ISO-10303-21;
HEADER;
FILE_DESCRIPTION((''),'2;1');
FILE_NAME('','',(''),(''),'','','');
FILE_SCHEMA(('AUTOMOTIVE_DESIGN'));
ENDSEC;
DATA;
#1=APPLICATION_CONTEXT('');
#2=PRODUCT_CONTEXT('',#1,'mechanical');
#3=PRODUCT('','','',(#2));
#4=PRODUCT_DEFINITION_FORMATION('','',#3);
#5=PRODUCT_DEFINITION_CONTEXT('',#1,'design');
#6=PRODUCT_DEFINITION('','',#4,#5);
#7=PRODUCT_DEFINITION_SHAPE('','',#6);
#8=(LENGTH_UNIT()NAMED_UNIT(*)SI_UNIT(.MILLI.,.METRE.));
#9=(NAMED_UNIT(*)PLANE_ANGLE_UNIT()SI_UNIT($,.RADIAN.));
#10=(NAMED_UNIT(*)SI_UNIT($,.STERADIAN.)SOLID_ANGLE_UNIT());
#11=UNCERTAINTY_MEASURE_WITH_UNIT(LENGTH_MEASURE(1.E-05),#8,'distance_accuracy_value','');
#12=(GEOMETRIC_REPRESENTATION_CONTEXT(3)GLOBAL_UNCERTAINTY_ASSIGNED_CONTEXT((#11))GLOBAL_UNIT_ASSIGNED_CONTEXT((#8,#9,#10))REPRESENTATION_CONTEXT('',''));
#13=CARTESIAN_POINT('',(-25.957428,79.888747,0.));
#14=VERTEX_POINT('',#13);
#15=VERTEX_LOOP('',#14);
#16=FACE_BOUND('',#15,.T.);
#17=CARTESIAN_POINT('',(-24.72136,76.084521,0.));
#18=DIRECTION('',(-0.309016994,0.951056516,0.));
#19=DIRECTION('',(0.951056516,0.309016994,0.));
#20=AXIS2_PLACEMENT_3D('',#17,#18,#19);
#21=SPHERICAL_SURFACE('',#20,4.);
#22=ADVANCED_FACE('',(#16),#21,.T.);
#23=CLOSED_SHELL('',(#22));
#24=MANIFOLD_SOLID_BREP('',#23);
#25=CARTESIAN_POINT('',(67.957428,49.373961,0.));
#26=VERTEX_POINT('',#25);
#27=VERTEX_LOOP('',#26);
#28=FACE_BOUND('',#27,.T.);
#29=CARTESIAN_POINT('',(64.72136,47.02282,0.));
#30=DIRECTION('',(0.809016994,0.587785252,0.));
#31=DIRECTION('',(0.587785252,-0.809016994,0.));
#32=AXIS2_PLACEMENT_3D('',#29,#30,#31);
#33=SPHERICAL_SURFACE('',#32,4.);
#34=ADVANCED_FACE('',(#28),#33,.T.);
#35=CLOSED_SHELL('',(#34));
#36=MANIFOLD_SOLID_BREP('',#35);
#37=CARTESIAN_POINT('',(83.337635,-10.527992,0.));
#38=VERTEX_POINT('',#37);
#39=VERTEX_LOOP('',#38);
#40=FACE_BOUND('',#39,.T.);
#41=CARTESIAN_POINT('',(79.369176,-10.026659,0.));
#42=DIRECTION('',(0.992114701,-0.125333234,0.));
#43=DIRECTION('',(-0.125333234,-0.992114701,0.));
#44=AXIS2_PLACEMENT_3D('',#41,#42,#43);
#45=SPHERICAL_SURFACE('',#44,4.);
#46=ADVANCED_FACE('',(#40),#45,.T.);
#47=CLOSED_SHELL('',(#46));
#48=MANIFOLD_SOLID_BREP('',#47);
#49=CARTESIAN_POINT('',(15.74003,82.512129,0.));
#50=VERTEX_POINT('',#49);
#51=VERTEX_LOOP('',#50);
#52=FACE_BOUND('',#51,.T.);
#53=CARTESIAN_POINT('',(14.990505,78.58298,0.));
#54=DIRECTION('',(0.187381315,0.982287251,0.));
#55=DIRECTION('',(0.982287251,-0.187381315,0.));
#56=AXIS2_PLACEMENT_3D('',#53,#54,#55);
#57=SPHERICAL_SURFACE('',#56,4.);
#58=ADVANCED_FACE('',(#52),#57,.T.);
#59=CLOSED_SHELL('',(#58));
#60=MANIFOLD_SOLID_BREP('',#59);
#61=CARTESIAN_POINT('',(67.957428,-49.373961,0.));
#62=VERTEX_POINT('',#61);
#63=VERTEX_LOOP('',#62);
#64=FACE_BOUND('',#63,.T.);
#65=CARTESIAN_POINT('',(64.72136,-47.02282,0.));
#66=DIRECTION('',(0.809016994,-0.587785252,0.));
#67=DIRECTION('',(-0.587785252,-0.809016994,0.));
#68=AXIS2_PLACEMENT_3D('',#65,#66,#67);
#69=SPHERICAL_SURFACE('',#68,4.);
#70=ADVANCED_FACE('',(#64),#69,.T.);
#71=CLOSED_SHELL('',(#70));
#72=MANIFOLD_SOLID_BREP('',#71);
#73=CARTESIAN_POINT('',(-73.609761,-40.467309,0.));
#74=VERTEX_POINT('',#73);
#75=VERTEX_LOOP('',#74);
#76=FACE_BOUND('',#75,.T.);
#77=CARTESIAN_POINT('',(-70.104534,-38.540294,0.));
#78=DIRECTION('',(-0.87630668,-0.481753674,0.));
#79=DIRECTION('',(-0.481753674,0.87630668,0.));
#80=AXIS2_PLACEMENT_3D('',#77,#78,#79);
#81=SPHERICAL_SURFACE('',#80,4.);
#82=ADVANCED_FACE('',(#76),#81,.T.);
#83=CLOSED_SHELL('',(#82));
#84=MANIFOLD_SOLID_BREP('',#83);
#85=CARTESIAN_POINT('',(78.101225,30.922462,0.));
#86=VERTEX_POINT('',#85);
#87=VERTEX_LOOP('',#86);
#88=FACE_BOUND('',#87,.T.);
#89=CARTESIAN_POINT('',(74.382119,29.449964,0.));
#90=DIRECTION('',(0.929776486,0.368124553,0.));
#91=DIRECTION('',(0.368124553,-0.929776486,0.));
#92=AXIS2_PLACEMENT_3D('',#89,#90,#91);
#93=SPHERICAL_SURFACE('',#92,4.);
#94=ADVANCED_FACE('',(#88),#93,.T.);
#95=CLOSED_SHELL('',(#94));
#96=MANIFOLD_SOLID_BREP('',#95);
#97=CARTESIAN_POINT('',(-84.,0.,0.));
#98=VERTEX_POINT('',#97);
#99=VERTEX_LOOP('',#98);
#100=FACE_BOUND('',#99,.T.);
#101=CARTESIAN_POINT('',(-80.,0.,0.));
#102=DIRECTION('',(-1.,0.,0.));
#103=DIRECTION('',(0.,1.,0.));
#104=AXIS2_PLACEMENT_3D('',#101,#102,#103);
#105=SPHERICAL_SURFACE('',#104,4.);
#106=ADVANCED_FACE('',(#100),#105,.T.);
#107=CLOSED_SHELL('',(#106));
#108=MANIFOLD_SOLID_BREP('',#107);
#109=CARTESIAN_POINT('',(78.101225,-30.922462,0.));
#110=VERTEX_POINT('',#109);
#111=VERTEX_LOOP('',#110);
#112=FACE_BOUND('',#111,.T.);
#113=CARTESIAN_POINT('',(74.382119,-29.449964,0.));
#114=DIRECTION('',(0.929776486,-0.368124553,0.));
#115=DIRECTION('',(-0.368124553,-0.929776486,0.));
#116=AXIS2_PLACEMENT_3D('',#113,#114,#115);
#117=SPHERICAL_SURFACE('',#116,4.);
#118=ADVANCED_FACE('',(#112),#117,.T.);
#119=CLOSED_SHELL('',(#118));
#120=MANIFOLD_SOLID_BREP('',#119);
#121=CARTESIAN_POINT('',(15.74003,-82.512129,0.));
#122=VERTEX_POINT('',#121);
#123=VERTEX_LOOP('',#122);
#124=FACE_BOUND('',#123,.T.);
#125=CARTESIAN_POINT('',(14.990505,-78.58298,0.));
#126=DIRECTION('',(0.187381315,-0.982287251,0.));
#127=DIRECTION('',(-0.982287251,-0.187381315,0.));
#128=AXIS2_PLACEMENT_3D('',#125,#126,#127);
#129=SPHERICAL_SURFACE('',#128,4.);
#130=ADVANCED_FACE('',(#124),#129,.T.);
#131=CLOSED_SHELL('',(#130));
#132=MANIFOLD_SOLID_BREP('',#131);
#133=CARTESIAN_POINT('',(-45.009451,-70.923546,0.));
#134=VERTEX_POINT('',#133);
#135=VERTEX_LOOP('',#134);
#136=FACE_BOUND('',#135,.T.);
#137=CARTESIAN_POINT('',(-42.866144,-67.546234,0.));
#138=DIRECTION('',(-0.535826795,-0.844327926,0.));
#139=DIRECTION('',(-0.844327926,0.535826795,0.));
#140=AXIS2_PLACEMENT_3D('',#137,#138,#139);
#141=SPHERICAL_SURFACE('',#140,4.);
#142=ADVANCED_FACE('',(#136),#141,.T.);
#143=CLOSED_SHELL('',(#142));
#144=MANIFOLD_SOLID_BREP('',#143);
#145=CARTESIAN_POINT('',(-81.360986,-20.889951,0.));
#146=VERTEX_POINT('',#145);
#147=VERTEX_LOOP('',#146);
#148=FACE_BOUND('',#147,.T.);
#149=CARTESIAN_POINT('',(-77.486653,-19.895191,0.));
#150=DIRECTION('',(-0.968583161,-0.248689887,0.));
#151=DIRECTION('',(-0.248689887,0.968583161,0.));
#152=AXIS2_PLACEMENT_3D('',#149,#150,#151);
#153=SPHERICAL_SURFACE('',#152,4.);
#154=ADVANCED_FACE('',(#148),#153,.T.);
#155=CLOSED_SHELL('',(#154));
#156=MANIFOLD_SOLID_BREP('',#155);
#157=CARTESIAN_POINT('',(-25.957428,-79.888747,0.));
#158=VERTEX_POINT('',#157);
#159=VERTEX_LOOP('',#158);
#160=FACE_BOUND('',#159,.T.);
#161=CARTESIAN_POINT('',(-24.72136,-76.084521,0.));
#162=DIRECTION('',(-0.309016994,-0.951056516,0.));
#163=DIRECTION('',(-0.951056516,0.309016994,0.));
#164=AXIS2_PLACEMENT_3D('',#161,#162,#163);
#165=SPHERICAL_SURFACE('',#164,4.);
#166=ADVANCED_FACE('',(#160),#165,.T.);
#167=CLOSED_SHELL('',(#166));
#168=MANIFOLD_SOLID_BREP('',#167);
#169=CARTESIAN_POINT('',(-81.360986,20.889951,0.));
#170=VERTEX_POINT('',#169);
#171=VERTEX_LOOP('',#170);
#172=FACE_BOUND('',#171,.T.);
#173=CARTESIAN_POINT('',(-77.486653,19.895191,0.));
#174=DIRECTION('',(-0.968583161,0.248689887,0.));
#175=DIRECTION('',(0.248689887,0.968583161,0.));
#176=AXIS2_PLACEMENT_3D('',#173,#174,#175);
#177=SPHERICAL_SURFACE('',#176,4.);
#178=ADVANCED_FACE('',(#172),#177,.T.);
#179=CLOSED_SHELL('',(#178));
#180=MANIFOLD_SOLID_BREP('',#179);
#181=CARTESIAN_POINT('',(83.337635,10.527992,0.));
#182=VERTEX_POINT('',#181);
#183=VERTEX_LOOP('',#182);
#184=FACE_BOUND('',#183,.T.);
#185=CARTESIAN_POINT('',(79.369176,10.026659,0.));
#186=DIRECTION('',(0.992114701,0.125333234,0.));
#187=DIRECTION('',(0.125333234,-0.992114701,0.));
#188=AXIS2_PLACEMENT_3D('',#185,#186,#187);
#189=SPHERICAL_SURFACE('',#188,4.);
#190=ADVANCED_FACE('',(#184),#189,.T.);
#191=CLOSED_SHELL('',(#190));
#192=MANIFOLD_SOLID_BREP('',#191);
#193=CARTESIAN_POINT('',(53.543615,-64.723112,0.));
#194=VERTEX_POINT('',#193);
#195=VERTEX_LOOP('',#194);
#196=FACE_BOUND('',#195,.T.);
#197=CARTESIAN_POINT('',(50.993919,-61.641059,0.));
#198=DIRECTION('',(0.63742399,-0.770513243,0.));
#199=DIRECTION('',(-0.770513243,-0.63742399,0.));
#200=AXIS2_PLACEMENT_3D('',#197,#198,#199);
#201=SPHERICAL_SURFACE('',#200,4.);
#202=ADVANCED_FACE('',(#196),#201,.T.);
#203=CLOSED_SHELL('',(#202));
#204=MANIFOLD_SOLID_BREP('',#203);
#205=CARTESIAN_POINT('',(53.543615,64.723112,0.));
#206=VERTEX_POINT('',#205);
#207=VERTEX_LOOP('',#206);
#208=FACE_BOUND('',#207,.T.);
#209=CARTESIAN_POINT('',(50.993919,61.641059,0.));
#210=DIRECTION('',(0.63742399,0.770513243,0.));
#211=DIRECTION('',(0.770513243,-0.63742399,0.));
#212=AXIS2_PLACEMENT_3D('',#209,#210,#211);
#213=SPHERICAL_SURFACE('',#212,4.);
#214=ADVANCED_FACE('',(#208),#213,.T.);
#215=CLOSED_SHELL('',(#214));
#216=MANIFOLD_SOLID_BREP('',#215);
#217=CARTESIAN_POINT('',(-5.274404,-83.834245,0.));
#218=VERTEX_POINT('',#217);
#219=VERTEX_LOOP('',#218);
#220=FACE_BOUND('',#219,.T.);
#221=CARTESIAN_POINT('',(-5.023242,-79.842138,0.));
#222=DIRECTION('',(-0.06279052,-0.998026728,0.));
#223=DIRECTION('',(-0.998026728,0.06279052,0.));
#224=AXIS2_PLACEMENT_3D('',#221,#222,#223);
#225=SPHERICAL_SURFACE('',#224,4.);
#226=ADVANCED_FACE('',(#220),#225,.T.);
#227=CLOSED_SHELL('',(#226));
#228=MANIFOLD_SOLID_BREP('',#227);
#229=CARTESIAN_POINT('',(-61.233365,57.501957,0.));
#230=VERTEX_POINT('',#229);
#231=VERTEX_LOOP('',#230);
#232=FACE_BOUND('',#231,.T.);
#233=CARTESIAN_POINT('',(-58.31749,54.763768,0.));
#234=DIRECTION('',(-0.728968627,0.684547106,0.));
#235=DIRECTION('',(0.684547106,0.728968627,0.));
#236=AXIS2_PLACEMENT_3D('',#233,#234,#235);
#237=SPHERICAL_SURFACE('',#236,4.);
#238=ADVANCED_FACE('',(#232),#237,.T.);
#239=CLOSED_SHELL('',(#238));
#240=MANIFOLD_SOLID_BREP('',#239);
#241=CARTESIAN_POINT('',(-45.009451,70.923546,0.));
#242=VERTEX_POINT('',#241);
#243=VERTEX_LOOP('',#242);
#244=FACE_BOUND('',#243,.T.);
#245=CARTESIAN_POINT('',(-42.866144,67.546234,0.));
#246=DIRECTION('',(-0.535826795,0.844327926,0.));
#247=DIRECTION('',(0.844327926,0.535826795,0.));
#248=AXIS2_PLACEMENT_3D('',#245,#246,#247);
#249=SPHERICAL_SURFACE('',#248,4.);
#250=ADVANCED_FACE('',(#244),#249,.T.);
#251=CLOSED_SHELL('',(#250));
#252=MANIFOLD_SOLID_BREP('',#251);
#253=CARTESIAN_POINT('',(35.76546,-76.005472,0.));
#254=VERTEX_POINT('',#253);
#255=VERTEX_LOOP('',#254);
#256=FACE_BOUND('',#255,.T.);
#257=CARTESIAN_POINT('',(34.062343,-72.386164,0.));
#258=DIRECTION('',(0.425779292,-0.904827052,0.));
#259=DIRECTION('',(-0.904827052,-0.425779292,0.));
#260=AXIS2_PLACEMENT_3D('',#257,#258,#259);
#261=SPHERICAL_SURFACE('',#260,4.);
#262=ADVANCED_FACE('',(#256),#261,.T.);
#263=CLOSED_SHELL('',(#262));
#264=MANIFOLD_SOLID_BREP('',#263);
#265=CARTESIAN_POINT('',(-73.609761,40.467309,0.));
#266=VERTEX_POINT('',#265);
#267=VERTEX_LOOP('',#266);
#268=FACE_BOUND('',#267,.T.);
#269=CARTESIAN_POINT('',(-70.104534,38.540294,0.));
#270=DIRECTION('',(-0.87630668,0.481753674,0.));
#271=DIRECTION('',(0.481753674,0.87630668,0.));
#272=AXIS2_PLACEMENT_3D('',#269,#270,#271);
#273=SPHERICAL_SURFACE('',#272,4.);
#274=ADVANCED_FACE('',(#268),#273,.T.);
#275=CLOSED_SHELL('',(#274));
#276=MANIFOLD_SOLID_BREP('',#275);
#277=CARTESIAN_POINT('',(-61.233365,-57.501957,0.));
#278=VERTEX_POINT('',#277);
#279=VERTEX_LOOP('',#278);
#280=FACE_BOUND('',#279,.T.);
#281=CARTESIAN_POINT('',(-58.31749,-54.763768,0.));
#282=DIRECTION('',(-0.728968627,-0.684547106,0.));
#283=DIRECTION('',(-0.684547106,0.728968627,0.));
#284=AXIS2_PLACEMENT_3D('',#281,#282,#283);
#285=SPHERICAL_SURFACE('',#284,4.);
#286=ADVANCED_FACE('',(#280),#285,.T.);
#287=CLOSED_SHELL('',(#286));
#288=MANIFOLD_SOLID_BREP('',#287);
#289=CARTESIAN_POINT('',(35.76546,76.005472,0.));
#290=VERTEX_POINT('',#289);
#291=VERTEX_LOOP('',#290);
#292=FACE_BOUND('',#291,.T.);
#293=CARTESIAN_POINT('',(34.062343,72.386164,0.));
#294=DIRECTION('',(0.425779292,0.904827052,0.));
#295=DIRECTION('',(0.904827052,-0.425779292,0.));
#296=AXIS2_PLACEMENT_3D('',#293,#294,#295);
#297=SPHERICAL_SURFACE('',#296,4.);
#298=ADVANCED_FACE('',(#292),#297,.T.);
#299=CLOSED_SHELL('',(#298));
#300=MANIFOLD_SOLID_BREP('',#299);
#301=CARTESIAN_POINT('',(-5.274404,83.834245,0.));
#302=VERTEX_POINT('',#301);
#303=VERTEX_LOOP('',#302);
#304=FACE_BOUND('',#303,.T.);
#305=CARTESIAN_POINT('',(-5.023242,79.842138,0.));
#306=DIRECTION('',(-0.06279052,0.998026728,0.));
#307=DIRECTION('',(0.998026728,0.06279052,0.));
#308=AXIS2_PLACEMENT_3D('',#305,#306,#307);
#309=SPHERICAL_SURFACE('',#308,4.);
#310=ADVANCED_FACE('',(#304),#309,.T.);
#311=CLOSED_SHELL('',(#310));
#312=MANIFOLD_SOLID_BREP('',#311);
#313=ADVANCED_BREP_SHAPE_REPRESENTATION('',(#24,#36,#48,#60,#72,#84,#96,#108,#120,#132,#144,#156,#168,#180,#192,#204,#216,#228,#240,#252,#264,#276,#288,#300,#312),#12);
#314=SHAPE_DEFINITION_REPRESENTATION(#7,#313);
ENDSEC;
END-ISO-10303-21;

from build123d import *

# Parameters (mm, degrees)
CIRPATTERN1_COUNT = 25


with BuildPart() as part:
    # Sketch1 → Revolve1 (revolve)
    with BuildSketch(Plane.XY):
        with BuildLine():
            ThreePointArc((-76, 0), (-80, 4), (-84, 0))
            Line((-84, 0), (-76, 0))
        make_face()
    revolve(axis=Axis((-84, 0, 0), (1, 0, 0)))


with BuildPart() as cirpattern1_1:
    # CirPattern1: pattern copy
    add(part.part.rotate(Axis((0, 0, 4.4), (0, 0, -1)), 1 * 360 / CIRPATTERN1_COUNT))


with BuildPart() as cirpattern1_2:
    # CirPattern1: pattern copy
    add(part.part.rotate(Axis((0, 0, 4.4), (0, 0, -1)), 2 * 360 / CIRPATTERN1_COUNT))


with BuildPart() as cirpattern1_3:
    # CirPattern1: pattern copy
    add(part.part.rotate(Axis((0, 0, 4.4), (0, 0, -1)), 3 * 360 / CIRPATTERN1_COUNT))


with BuildPart() as cirpattern1_4:
    # CirPattern1: pattern copy
    add(part.part.rotate(Axis((0, 0, 4.4), (0, 0, -1)), 4 * 360 / CIRPATTERN1_COUNT))


with BuildPart() as cirpattern1_5:
    # CirPattern1: pattern copy
    add(part.part.rotate(Axis((0, 0, 4.4), (0, 0, -1)), 5 * 360 / CIRPATTERN1_COUNT))


with BuildPart() as cirpattern1_6:
    # CirPattern1: pattern copy
    add(part.part.rotate(Axis((0, 0, 4.4), (0, 0, -1)), 6 * 360 / CIRPATTERN1_COUNT))


with BuildPart() as cirpattern1_7:
    # CirPattern1: pattern copy
    add(part.part.rotate(Axis((0, 0, 4.4), (0, 0, -1)), 7 * 360 / CIRPATTERN1_COUNT))


with BuildPart() as cirpattern1_8:
    # CirPattern1: pattern copy
    add(part.part.rotate(Axis((0, 0, 4.4), (0, 0, -1)), 8 * 360 / CIRPATTERN1_COUNT))


with BuildPart() as cirpattern1_9:
    # CirPattern1: pattern copy
    add(part.part.rotate(Axis((0, 0, 4.4), (0, 0, -1)), 9 * 360 / CIRPATTERN1_COUNT))


with BuildPart() as cirpattern1_10:
    # CirPattern1: pattern copy
    add(part.part.rotate(Axis((0, 0, 4.4), (0, 0, -1)), 10 * 360 / CIRPATTERN1_COUNT))


with BuildPart() as cirpattern1_11:
    # CirPattern1: pattern copy
    add(part.part.rotate(Axis((0, 0, 4.4), (0, 0, -1)), 11 * 360 / CIRPATTERN1_COUNT))


with BuildPart() as cirpattern1_12:
    # CirPattern1: pattern copy
    add(part.part.rotate(Axis((0, 0, 4.4), (0, 0, -1)), 12 * 360 / CIRPATTERN1_COUNT))


with BuildPart() as cirpattern1_13:
    # CirPattern1: pattern copy
    add(part.part.rotate(Axis((0, 0, 4.4), (0, 0, -1)), 13 * 360 / CIRPATTERN1_COUNT))


with BuildPart() as cirpattern1_14:
    # CirPattern1: pattern copy
    add(part.part.rotate(Axis((0, 0, 4.4), (0, 0, -1)), 14 * 360 / CIRPATTERN1_COUNT))


with BuildPart() as cirpattern1_15:
    # CirPattern1: pattern copy
    add(part.part.rotate(Axis((0, 0, 4.4), (0, 0, -1)), 15 * 360 / CIRPATTERN1_COUNT))


with BuildPart() as cirpattern1_16:
    # CirPattern1: pattern copy
    add(part.part.rotate(Axis((0, 0, 4.4), (0, 0, -1)), 16 * 360 / CIRPATTERN1_COUNT))


with BuildPart() as cirpattern1_17:
    # CirPattern1: pattern copy
    add(part.part.rotate(Axis((0, 0, 4.4), (0, 0, -1)), 17 * 360 / CIRPATTERN1_COUNT))


with BuildPart() as cirpattern1_18:
    # CirPattern1: pattern copy
    add(part.part.rotate(Axis((0, 0, 4.4), (0, 0, -1)), 18 * 360 / CIRPATTERN1_COUNT))


with BuildPart() as cirpattern1_19:
    # CirPattern1: pattern copy
    add(part.part.rotate(Axis((0, 0, 4.4), (0, 0, -1)), 19 * 360 / CIRPATTERN1_COUNT))


with BuildPart() as cirpattern1_20:
    # CirPattern1: pattern copy
    add(part.part.rotate(Axis((0, 0, 4.4), (0, 0, -1)), 20 * 360 / CIRPATTERN1_COUNT))


with BuildPart() as cirpattern1_21:
    # CirPattern1: pattern copy
    add(part.part.rotate(Axis((0, 0, 4.4), (0, 0, -1)), 21 * 360 / CIRPATTERN1_COUNT))


with BuildPart() as cirpattern1_22:
    # CirPattern1: pattern copy
    add(part.part.rotate(Axis((0, 0, 4.4), (0, 0, -1)), 22 * 360 / CIRPATTERN1_COUNT))


with BuildPart() as cirpattern1_23:
    # CirPattern1: pattern copy
    add(part.part.rotate(Axis((0, 0, 4.4), (0, 0, -1)), 23 * 360 / CIRPATTERN1_COUNT))


with BuildPart() as cirpattern1_24:
    # CirPattern1: pattern copy
    add(part.part.rotate(Axis((0, 0, 4.4), (0, 0, -1)), 24 * 360 / CIRPATTERN1_COUNT))


solid = Compound([part.part, cirpattern1_1.part, cirpattern1_2.part, cirpattern1_3.part, cirpattern1_4.part, cirpattern1_5.part, cirpattern1_6.part, cirpattern1_7.part, cirpattern1_8.part, cirpattern1_9.part, cirpattern1_10.part, cirpattern1_11.part, cirpattern1_12.part, cirpattern1_13.part, cirpattern1_14.part, cirpattern1_15.part, cirpattern1_16.part, cirpattern1_17.part, cirpattern1_18.part, cirpattern1_19.part, cirpattern1_20.part, cirpattern1_21.part, cirpattern1_22.part, cirpattern1_23.part, cirpattern1_24.part])
